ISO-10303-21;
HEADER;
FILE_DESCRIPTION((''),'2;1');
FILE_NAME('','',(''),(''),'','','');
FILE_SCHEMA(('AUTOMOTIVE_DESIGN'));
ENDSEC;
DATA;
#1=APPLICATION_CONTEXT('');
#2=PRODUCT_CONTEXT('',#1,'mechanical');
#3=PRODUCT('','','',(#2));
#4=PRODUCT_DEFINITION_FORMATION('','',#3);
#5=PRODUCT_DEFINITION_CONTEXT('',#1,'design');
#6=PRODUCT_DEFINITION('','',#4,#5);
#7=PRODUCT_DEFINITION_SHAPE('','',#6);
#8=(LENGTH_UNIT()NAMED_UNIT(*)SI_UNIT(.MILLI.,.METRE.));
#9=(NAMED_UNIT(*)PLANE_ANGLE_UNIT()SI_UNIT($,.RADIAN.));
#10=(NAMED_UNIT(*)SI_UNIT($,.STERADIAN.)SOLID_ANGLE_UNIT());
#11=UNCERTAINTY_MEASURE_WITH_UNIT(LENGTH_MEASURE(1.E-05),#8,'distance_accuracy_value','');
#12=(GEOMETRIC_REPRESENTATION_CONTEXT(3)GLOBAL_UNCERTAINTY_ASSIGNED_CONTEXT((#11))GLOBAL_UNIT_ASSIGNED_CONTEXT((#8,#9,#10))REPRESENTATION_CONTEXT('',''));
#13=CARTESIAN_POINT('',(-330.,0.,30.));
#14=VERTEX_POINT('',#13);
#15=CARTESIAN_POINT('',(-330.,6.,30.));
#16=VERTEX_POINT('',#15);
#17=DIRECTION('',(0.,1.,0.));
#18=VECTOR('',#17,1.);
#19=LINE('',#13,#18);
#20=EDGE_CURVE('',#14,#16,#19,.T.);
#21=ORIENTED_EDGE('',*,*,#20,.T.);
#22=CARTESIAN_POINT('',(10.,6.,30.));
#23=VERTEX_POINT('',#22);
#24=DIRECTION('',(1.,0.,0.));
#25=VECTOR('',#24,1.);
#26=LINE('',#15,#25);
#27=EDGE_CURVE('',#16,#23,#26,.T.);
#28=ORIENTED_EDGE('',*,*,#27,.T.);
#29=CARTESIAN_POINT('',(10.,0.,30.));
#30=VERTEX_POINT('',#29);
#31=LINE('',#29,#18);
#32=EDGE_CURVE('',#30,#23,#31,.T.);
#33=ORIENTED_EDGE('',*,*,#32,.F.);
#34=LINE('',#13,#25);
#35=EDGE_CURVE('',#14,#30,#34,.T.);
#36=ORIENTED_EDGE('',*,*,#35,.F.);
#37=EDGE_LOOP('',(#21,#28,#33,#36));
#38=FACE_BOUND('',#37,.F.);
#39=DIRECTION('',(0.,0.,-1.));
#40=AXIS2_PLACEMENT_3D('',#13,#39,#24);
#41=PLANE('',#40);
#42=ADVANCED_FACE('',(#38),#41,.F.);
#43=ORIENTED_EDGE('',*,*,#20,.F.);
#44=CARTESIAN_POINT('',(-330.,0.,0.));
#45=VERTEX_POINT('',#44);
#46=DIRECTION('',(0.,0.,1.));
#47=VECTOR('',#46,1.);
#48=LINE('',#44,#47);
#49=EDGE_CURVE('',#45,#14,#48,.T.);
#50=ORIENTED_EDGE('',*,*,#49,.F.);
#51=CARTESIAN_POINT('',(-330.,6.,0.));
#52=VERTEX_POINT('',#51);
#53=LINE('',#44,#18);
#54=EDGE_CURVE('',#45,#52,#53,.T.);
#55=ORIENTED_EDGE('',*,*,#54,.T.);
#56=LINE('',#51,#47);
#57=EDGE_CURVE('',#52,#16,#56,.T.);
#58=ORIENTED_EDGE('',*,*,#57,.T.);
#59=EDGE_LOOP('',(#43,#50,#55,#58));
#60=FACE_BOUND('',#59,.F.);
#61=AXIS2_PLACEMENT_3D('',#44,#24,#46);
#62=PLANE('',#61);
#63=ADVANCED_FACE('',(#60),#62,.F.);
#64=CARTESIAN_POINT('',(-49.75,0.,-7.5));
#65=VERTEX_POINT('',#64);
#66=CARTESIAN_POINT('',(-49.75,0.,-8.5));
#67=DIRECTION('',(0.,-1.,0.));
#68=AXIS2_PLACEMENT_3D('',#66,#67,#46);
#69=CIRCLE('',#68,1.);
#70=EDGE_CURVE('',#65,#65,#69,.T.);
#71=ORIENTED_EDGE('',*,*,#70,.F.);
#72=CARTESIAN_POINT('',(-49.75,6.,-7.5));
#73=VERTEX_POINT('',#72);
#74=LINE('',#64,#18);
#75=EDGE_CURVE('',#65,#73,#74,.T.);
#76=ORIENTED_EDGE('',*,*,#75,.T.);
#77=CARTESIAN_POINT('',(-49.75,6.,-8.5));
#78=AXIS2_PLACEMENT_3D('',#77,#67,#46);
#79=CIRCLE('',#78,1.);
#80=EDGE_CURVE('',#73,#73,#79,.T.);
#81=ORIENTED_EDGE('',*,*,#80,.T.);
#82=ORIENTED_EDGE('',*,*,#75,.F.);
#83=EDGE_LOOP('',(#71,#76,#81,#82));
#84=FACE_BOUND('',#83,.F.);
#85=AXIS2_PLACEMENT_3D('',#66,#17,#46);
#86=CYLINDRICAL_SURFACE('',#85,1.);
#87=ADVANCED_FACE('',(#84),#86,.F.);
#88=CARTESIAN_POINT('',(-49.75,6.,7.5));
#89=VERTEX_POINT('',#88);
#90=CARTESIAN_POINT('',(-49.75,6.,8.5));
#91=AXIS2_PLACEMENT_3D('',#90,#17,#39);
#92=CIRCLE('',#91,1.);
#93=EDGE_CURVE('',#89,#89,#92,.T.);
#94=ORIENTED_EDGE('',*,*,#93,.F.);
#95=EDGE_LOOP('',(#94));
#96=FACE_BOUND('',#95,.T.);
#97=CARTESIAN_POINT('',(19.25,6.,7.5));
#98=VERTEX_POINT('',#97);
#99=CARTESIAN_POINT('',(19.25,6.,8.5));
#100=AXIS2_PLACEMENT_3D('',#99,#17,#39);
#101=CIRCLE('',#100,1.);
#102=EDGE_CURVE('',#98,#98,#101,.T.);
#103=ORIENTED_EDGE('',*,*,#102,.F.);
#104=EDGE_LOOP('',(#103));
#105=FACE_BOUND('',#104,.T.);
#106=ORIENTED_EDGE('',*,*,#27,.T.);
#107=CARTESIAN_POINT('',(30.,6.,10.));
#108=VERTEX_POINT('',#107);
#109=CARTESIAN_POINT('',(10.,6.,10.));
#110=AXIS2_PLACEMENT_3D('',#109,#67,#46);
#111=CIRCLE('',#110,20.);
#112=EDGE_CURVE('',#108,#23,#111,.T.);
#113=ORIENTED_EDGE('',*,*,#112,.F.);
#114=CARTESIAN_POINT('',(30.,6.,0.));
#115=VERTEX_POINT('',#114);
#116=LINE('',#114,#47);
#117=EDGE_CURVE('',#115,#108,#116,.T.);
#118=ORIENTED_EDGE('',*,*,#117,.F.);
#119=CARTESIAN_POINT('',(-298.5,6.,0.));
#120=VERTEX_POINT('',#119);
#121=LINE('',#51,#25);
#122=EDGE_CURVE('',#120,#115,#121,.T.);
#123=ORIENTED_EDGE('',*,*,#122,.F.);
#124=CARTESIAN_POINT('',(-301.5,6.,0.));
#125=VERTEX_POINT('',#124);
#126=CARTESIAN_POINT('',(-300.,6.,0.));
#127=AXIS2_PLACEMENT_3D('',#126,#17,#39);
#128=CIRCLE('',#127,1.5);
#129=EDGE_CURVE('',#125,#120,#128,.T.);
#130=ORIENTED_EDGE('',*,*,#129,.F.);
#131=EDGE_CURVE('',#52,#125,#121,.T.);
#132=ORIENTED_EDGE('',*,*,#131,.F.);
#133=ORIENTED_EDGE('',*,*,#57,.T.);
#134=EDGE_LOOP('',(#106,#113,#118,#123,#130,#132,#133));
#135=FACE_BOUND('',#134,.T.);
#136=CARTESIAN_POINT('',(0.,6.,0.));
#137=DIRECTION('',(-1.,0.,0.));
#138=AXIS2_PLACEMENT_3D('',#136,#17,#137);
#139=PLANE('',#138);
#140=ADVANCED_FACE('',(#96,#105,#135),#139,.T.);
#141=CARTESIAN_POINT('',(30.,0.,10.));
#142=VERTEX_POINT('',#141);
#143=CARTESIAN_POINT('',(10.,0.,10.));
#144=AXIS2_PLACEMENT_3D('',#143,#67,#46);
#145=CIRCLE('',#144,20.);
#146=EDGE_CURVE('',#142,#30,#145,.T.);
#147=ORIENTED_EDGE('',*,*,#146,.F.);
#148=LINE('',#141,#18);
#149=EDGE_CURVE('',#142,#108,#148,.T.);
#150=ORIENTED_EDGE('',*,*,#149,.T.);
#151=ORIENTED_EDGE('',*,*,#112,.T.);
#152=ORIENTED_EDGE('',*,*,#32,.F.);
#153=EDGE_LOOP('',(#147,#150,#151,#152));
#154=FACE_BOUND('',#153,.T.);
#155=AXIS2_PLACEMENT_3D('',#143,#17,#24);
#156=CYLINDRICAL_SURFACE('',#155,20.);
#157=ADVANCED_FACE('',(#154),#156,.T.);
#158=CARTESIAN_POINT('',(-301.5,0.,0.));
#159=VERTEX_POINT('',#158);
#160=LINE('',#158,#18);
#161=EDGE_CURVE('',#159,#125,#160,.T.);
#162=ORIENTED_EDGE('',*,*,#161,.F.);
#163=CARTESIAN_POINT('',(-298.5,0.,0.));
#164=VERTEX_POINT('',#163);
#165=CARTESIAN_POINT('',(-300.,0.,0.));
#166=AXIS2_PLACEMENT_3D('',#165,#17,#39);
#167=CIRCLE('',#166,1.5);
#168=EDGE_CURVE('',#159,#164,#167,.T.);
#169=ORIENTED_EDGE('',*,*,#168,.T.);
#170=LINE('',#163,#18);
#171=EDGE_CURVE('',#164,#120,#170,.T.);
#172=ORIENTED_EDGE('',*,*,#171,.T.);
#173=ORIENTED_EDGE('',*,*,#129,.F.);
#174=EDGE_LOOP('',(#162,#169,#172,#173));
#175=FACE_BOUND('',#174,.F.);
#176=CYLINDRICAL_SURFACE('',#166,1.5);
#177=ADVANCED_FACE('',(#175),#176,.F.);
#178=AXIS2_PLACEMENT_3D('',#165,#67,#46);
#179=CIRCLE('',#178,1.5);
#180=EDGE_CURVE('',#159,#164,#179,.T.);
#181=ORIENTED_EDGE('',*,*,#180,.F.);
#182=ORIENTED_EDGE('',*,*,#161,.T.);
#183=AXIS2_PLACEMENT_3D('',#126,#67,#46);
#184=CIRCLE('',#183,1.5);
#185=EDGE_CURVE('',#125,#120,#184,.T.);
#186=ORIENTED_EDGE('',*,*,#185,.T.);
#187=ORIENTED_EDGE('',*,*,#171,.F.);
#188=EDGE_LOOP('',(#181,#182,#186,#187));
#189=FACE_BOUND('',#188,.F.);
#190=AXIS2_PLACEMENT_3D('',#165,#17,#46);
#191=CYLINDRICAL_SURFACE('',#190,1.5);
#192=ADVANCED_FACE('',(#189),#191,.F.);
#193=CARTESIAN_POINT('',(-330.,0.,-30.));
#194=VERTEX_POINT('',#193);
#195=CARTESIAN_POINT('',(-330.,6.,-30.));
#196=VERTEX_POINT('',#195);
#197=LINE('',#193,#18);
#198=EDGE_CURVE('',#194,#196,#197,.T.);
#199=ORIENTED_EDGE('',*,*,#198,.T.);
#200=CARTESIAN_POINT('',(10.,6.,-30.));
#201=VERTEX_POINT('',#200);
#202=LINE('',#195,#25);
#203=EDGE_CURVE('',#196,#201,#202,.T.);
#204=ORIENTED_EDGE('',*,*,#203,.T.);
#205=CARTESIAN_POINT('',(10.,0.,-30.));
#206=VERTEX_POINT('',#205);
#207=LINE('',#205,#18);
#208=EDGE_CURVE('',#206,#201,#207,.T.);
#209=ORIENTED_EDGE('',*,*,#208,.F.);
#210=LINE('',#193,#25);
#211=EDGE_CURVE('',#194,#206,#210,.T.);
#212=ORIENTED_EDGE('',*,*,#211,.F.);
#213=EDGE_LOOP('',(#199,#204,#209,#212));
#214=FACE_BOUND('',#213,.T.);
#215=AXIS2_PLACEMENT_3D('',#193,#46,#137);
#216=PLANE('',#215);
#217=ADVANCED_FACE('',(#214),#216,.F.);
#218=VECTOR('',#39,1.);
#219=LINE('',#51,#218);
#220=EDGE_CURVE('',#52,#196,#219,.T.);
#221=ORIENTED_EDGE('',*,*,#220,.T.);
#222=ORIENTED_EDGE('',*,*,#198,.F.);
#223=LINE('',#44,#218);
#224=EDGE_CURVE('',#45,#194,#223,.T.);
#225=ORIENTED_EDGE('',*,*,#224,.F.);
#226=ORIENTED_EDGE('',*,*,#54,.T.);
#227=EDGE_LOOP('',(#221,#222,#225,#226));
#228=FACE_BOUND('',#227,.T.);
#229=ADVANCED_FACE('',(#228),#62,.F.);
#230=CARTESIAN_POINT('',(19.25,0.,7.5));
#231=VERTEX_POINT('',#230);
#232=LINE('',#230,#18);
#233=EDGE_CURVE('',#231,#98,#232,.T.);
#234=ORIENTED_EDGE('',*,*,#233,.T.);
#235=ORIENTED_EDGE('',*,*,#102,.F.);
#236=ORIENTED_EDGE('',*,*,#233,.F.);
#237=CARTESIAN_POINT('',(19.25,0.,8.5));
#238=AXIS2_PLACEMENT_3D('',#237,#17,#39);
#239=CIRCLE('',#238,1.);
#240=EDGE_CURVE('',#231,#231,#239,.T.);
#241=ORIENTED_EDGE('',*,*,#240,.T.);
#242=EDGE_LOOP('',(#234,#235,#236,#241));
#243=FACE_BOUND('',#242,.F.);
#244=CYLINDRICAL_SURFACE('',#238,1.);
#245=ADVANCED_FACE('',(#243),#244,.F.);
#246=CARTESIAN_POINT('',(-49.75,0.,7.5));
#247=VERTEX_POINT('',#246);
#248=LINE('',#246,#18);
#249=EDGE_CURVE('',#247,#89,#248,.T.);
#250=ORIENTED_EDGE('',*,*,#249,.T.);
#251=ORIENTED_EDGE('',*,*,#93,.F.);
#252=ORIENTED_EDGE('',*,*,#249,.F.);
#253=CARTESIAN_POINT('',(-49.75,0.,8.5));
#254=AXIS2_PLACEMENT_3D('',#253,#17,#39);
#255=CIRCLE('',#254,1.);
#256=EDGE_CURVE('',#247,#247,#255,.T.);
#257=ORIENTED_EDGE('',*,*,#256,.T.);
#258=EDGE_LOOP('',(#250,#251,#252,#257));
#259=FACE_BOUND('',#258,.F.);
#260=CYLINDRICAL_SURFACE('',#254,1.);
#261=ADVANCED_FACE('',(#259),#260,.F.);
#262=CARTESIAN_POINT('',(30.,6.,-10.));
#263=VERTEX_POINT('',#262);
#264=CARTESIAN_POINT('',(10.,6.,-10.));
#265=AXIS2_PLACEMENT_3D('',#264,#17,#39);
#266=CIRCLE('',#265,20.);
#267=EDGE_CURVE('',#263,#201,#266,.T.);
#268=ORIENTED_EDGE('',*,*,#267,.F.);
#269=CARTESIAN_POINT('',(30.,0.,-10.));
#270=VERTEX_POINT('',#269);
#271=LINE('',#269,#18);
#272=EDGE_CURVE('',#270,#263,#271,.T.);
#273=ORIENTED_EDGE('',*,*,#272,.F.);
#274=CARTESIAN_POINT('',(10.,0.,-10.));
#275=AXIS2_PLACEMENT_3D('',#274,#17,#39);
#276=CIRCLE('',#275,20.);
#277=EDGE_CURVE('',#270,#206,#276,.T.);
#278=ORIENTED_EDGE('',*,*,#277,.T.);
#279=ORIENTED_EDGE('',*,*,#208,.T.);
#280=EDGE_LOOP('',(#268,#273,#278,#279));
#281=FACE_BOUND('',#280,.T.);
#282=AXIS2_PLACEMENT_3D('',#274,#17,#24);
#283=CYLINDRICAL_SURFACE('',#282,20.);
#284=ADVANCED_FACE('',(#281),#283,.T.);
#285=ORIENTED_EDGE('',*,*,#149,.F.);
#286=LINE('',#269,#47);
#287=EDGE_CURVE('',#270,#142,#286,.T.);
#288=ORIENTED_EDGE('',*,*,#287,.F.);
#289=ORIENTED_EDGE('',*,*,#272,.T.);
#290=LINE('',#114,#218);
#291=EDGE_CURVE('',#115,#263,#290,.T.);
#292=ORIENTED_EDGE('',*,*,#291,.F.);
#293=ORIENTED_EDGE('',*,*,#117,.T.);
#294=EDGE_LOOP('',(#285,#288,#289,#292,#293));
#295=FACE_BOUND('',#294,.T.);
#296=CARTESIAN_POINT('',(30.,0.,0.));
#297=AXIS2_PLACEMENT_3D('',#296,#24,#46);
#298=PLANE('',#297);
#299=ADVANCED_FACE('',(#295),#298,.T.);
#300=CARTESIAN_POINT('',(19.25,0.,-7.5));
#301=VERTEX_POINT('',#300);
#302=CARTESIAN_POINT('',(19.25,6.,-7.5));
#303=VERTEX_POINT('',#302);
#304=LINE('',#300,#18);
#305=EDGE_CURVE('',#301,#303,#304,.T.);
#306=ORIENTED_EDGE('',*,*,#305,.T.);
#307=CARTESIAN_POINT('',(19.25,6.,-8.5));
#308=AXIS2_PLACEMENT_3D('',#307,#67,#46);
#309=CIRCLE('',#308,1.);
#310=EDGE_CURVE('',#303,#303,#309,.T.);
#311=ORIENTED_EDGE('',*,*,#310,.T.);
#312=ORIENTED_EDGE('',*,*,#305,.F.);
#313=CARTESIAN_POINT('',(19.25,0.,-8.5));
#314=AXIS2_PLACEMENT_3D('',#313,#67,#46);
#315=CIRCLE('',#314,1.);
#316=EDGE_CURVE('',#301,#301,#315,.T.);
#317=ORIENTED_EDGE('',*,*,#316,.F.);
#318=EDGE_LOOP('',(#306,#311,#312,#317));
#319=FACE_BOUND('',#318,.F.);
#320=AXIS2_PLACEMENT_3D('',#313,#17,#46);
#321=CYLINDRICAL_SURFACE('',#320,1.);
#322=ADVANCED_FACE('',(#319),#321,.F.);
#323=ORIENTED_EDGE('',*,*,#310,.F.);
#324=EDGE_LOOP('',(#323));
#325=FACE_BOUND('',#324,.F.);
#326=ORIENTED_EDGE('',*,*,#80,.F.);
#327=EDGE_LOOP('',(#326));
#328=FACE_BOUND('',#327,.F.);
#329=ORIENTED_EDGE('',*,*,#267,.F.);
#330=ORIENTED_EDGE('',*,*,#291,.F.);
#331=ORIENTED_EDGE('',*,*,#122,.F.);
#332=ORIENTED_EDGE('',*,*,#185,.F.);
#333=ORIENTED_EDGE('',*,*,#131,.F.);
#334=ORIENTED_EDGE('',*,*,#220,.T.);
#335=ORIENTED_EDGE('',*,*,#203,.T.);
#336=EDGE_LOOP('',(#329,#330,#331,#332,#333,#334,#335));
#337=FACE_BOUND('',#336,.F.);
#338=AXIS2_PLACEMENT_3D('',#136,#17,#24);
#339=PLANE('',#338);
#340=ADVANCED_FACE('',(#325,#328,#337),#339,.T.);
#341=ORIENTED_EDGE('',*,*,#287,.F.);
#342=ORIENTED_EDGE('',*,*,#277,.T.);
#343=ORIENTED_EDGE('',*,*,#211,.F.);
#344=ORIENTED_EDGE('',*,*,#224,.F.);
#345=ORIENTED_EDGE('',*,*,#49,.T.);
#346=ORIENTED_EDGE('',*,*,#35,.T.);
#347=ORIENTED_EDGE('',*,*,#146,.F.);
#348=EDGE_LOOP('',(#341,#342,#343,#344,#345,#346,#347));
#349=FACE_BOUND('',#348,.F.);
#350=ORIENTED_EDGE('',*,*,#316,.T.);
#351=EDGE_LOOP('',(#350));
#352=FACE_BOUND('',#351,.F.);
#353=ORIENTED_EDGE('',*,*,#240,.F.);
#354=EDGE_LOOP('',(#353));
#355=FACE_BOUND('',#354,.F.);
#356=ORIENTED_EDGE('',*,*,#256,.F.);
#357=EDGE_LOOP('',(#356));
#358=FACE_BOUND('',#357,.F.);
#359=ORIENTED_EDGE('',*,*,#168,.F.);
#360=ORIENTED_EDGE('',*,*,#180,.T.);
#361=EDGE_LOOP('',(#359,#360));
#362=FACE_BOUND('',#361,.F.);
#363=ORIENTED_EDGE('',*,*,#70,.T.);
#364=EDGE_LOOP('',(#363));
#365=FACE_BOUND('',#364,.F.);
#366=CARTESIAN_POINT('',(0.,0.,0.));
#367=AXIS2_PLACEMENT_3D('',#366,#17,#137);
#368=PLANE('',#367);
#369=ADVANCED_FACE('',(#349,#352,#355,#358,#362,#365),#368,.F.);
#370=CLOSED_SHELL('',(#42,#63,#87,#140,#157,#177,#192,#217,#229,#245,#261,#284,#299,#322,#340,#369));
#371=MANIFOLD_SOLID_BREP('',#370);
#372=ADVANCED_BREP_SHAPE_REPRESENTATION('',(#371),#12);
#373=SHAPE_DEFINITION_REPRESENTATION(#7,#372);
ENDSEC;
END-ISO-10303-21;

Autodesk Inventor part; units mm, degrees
ref_plane "YZ Plane" through (0, 0, 0) normal (1, 0, 0) x (0, 1, 0)
ref_plane "XZ Plane" through (0, 0, 0) normal (0, 1, 0) x (-1, 0, 0)
ref_plane "XY Plane" through (0, 0, 0) normal (0, 0, 1) x (1, 0, 0)
sketch "Sketch1" plane through (0, 0, 0) normal (0, 1, 0) x (-1, 0, 0)
  line L0 (0, 0) -> (-16.25, 0)
  line L1 (0, 0) -> (46.75, 0)
  line L2 (300, 0) -> (330, 0)
  line L3 (330, 30) -> (-30, 30)
  line L4 (-19.25, 8.5) -> (49.75, 8.5) construction
  line L5 (49.75, 8.5) -> (49.75, -8.5) construction
  line L6 (49.75, -8.5) -> (-19.25, -8.5) construction
  line L7 (-19.25, -8.5) -> (-19.25, 8.5) construction
  line L8 (-19.25, 8.5) -> (49.75, -8.5) construction
  line L9 (49.75, 8.5) -> (-19.25, -8.5) construction
  line L10 (-30, 0) -> (-30, 30)
  line L11 (330, 0) -> (330, 30)
  line L12 (46.75, 0) -> (300, 0)
  line L13 (-16.25, 0) -> (-30, 0)
  line L14 (0, 0) -> (-30, 0) construction
  point P0 (15.25, 0)
  point P1 (15.25, 0)
  dimension "d0" = 300
  dimension "d7" = 69
  dimension "d8" = 17
  dimension "d10" = 30
  dimension "d11" = 30
  dimension "d29" = 19.25
extrude "Extrusion1" add sketch "Sketch1" along normal blind 6
hole "Hole1" at (19.25, 0, 8.5) at (-49.75, 0, 8.5) direction (0, 1, 0) diameter 2 end through all
hole "Hole2" at (-300, 0, 0) direction (0, 1, 0) diameter 3 end through all
fillet "Fillet1" radius 20 1 edges at (30, 3, 30)
mirror "Mirror1" about plane through (16.25, 0, 0) normal (0, 0, -1)
properties part number "segment1b" material "Plywood, Finish"
